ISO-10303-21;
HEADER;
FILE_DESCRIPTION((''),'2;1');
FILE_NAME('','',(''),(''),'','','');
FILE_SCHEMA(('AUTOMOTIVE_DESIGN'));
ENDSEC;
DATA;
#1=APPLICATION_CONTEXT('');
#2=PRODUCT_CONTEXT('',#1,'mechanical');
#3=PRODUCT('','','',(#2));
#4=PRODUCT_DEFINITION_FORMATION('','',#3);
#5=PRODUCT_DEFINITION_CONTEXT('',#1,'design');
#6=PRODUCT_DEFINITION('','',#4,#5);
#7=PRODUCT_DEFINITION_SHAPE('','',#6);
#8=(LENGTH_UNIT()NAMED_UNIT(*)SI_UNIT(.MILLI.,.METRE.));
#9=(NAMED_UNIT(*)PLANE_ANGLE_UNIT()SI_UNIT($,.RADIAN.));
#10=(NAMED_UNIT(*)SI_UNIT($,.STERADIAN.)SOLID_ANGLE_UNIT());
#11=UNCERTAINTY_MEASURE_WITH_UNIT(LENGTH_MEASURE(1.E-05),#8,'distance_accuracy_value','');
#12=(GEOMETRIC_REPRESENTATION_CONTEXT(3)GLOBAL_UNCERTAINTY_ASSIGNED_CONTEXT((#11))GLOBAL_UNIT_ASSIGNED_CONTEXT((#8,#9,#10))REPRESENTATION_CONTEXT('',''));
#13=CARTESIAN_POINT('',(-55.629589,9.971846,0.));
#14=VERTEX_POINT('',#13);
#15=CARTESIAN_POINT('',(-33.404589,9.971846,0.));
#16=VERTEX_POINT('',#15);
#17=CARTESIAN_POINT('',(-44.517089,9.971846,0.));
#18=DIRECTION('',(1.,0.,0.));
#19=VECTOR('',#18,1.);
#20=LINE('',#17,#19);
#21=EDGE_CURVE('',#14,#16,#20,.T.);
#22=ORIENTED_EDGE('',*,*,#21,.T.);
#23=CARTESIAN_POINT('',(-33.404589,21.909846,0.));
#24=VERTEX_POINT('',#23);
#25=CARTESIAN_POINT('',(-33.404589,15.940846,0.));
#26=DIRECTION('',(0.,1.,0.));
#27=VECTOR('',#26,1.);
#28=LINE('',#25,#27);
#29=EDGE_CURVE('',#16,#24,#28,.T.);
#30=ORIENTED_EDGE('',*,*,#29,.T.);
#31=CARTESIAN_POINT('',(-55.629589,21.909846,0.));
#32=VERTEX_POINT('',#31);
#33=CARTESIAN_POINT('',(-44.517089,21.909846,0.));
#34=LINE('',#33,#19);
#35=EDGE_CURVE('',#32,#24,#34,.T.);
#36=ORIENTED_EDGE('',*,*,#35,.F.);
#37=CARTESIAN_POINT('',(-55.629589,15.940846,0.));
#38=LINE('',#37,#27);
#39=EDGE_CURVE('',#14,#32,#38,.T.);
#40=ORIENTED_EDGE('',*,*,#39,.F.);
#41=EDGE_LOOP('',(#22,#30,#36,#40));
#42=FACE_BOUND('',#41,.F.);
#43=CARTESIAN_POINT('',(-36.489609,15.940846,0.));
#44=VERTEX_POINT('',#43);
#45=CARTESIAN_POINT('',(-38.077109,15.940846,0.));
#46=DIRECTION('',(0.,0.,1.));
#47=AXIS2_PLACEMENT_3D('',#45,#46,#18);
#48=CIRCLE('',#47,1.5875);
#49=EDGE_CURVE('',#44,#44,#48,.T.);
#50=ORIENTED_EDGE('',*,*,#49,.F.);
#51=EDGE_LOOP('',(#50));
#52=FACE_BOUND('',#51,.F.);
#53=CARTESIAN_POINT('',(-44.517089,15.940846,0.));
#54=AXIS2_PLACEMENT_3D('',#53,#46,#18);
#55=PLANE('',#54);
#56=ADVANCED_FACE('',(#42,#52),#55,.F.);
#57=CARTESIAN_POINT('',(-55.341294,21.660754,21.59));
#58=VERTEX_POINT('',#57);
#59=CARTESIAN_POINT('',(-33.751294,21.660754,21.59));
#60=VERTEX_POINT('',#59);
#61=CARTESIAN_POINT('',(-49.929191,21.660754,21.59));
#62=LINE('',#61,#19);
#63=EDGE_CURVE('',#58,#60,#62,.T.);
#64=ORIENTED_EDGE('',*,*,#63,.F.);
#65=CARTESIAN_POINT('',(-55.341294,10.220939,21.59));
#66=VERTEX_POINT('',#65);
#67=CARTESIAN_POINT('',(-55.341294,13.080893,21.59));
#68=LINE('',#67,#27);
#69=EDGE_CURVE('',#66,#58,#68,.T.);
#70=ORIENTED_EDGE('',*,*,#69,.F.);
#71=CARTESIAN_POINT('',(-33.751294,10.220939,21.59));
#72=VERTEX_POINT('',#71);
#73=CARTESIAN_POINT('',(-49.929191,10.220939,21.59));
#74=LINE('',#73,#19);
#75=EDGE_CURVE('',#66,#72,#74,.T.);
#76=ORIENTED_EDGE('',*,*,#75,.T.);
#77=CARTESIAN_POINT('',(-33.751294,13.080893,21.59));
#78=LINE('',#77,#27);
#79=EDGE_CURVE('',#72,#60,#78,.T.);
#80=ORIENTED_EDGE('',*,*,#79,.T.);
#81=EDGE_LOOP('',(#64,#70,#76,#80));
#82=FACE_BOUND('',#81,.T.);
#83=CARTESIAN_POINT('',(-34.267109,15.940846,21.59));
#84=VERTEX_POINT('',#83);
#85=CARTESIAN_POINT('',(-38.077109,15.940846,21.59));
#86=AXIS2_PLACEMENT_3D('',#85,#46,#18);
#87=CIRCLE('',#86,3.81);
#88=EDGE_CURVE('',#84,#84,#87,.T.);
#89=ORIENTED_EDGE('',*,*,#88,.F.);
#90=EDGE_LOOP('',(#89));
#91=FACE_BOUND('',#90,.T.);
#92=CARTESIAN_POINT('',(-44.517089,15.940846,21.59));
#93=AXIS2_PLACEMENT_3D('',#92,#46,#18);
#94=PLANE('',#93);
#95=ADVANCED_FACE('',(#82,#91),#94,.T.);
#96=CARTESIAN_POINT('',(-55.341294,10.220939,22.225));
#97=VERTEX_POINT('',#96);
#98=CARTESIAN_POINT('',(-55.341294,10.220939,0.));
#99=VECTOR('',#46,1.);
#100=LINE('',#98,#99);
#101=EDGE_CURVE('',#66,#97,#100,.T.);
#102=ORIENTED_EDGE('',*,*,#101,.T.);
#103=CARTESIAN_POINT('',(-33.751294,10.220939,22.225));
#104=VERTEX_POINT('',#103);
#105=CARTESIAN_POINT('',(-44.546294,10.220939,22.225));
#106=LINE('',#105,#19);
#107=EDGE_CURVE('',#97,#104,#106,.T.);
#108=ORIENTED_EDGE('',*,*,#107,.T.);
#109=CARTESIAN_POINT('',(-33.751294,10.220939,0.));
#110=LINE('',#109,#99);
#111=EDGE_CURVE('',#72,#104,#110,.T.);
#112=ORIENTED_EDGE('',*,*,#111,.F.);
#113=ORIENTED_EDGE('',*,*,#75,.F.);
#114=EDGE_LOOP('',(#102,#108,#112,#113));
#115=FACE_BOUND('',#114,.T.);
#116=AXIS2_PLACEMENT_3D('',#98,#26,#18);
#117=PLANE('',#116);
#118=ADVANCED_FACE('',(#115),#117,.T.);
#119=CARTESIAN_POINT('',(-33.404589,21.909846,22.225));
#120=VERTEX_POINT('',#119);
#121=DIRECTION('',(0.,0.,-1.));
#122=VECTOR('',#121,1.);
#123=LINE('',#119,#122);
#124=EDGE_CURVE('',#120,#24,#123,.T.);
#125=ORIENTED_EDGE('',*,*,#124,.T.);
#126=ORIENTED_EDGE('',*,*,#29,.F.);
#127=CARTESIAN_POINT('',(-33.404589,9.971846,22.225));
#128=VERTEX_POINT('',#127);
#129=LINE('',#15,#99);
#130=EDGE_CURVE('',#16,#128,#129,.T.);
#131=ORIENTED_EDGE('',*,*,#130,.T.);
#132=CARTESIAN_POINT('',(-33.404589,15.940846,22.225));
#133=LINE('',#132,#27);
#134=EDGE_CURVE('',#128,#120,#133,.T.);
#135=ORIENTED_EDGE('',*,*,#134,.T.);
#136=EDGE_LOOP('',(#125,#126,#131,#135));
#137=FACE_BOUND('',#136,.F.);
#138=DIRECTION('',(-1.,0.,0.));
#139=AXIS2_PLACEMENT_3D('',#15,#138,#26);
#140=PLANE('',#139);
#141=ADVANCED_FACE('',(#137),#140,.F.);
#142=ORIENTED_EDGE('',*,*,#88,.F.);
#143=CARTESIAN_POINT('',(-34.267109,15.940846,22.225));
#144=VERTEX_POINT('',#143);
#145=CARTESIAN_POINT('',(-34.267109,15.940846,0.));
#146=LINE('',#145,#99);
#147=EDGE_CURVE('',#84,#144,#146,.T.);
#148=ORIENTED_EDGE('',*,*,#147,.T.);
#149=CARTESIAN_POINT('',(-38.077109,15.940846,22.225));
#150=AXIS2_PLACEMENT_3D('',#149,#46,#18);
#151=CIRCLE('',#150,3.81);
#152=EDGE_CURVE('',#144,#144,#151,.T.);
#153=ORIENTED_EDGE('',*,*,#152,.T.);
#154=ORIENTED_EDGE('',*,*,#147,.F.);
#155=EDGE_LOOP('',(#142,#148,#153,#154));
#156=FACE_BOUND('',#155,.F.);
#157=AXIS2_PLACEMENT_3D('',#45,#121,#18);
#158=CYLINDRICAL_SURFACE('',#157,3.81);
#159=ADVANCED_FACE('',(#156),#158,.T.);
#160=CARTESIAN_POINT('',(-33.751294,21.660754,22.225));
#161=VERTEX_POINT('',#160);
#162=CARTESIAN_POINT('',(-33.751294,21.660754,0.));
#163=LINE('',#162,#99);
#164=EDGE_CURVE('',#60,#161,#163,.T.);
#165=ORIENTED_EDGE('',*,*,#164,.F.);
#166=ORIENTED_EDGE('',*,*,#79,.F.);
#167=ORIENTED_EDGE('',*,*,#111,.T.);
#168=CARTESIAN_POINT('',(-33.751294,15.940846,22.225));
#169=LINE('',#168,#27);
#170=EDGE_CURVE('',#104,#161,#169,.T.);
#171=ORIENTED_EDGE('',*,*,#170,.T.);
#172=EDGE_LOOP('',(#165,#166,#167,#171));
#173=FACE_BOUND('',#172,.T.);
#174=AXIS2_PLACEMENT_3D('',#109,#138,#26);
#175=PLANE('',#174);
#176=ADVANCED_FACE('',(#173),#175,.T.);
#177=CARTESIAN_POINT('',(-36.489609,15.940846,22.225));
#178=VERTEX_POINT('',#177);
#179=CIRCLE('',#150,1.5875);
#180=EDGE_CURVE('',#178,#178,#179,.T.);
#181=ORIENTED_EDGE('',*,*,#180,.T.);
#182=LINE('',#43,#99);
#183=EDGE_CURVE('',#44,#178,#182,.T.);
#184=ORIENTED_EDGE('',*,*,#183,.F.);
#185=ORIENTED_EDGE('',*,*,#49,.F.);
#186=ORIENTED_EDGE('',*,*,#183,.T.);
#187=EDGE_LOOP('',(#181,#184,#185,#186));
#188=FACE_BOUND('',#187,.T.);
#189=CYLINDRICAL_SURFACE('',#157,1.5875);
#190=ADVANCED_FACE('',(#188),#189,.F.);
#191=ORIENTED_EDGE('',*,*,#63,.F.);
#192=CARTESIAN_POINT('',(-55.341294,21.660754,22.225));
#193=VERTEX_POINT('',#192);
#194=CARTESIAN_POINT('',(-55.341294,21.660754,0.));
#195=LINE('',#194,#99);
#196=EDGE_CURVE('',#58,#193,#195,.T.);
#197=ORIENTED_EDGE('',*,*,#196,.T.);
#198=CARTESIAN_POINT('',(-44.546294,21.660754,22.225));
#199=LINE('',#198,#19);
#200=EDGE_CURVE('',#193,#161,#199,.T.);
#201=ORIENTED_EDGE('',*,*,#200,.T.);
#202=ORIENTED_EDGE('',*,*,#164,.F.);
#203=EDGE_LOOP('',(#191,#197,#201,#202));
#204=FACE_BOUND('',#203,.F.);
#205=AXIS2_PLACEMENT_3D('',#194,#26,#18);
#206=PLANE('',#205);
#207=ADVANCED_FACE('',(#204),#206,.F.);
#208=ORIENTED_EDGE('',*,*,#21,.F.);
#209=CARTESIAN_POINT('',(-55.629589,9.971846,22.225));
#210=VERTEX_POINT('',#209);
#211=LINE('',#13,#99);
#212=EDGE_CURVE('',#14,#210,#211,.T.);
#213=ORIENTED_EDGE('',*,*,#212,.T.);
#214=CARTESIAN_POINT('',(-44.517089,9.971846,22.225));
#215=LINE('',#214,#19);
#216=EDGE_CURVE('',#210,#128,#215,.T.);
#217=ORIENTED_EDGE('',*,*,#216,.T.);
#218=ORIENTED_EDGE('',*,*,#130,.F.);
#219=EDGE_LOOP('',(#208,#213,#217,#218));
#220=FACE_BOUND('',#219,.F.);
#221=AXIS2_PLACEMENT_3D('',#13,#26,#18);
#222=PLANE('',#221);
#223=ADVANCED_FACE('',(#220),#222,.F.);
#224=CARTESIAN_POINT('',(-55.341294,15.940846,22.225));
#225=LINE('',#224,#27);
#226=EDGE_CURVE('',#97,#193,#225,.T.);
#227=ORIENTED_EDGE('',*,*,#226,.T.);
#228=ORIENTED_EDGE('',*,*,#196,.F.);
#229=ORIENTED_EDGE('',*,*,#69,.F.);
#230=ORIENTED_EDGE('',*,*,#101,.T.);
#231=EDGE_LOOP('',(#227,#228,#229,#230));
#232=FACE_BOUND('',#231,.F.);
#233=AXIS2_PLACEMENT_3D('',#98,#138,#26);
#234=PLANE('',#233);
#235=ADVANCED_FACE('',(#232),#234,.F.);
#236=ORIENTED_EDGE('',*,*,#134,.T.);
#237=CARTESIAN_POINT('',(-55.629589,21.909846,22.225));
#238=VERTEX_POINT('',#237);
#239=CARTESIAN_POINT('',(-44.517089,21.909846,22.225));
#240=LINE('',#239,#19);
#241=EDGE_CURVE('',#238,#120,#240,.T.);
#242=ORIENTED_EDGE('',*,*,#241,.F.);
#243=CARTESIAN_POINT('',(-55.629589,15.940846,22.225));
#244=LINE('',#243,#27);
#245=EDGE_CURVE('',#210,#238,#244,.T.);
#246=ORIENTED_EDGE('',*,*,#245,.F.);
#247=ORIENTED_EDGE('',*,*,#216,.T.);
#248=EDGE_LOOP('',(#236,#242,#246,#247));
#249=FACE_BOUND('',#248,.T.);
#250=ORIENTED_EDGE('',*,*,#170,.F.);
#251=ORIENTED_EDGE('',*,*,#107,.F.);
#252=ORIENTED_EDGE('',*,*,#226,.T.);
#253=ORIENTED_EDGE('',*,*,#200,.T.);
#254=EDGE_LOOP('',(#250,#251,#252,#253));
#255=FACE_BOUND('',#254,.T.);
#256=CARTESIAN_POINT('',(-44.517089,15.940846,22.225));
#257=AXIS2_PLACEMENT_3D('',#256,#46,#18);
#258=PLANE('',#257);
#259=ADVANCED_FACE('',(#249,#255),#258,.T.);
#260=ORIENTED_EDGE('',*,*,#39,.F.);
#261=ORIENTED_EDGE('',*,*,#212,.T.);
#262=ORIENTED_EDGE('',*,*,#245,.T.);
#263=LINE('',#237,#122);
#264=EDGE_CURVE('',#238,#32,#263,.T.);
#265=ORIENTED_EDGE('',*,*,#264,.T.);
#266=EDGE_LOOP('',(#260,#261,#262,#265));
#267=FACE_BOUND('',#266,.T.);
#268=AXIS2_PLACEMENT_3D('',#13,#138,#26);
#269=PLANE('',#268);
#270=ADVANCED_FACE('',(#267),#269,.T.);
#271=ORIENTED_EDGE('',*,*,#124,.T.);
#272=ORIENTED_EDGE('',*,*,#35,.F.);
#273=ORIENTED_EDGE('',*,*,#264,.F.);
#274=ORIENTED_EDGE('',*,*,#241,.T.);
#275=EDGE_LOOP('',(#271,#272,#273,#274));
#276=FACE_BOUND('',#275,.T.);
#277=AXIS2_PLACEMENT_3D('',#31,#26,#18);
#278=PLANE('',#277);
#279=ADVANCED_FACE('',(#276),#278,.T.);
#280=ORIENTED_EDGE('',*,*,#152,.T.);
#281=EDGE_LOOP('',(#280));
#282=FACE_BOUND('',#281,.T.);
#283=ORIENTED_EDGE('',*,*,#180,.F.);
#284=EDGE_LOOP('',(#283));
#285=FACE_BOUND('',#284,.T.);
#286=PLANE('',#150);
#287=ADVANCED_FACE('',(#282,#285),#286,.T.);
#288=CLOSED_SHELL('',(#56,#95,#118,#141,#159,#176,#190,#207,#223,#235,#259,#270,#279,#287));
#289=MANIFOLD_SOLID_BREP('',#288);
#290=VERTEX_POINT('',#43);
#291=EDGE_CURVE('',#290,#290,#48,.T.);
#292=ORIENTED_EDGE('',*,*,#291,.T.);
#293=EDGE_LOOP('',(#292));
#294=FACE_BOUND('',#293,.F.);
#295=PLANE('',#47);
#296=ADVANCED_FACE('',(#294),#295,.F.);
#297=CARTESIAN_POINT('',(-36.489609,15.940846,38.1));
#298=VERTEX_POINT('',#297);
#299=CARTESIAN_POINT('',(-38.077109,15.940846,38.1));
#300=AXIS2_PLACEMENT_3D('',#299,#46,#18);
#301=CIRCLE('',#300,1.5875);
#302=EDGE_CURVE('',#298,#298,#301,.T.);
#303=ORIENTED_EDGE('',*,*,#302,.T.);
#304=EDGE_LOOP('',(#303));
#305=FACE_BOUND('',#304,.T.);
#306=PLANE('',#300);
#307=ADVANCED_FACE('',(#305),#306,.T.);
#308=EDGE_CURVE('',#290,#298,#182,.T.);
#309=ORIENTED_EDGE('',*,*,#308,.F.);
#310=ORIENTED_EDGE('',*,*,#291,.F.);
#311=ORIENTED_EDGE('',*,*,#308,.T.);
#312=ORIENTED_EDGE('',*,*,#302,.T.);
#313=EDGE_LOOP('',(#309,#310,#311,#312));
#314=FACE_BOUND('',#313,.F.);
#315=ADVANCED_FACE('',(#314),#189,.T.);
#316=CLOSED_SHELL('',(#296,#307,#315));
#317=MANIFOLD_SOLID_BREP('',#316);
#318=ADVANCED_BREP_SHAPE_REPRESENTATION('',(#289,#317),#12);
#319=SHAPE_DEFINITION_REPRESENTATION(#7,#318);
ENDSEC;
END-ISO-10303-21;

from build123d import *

# Parameters (mm, degrees)
F0_W     = 22.225
F0_H     = 11.938
F0_W_2   = 21.59
F0_H_2   = 11.4398148928
F1_DEPTH = 22.225
F0_R     = 3.81
F0_R_2   = 1.5875
F2_DEPTH = 22.225
F3_DEPTH = 38.1
F4_DEPTH = 21.59


with BuildPart() as f1:
    # F0 (on Top) → F1 (new body)
    with BuildSketch(Plane.XY):
        with Locations((-44.5170886815, 15.9408464691)):
            Rectangle(F0_W, F0_H)
        with Locations((-44.5462938675, 15.9408464691)):
            Rectangle(F0_W_2, F0_H_2, mode=Mode.SUBTRACT)
    extrude(amount=F1_DEPTH)



with BuildPart() as f2:
    # F0 (on Top) → F2 (new body)
    with BuildSketch(Plane.XY):
        with Locations((-38.077108562, 15.9408464691)):
            Circle(F0_R)
        with Locations((-38.077108562, 15.9408464691)):
            Circle(F0_R_2, mode=Mode.SUBTRACT)
    extrude(amount=F2_DEPTH)


with BuildPart() as f3:
    # F0 (on Top) → F3 (new body)
    with BuildSketch(Plane.XY):
        with Locations((-38.077108562, 15.9408464691)):
            Circle(F0_R_2)
    extrude(amount=F3_DEPTH)


with BuildPart() as f1_1:
    add(f1.part)

    add(f2.part)  # F4 merges F2
    # F0 (on Top) → F4 (join)
    with BuildSketch(Plane.XY):
        with Locations((-44.5170886815, 15.9408464691)):
            Rectangle(F0_W, F0_H)
        with Locations((-44.5462938675, 15.9408464691)):
            Rectangle(F0_W_2, F0_H_2, mode=Mode.SUBTRACT)
        with Locations((-44.5462938675, 15.9408464691)):
            Rectangle(F0_W_2, F0_H_2)
        with Locations((-38.077108562, 15.9408464691)):
            Circle(F0_R, mode=Mode.SUBTRACT)
    extrude(amount=F4_DEPTH)


solid = Compound([f3.part, f1_1.part])
